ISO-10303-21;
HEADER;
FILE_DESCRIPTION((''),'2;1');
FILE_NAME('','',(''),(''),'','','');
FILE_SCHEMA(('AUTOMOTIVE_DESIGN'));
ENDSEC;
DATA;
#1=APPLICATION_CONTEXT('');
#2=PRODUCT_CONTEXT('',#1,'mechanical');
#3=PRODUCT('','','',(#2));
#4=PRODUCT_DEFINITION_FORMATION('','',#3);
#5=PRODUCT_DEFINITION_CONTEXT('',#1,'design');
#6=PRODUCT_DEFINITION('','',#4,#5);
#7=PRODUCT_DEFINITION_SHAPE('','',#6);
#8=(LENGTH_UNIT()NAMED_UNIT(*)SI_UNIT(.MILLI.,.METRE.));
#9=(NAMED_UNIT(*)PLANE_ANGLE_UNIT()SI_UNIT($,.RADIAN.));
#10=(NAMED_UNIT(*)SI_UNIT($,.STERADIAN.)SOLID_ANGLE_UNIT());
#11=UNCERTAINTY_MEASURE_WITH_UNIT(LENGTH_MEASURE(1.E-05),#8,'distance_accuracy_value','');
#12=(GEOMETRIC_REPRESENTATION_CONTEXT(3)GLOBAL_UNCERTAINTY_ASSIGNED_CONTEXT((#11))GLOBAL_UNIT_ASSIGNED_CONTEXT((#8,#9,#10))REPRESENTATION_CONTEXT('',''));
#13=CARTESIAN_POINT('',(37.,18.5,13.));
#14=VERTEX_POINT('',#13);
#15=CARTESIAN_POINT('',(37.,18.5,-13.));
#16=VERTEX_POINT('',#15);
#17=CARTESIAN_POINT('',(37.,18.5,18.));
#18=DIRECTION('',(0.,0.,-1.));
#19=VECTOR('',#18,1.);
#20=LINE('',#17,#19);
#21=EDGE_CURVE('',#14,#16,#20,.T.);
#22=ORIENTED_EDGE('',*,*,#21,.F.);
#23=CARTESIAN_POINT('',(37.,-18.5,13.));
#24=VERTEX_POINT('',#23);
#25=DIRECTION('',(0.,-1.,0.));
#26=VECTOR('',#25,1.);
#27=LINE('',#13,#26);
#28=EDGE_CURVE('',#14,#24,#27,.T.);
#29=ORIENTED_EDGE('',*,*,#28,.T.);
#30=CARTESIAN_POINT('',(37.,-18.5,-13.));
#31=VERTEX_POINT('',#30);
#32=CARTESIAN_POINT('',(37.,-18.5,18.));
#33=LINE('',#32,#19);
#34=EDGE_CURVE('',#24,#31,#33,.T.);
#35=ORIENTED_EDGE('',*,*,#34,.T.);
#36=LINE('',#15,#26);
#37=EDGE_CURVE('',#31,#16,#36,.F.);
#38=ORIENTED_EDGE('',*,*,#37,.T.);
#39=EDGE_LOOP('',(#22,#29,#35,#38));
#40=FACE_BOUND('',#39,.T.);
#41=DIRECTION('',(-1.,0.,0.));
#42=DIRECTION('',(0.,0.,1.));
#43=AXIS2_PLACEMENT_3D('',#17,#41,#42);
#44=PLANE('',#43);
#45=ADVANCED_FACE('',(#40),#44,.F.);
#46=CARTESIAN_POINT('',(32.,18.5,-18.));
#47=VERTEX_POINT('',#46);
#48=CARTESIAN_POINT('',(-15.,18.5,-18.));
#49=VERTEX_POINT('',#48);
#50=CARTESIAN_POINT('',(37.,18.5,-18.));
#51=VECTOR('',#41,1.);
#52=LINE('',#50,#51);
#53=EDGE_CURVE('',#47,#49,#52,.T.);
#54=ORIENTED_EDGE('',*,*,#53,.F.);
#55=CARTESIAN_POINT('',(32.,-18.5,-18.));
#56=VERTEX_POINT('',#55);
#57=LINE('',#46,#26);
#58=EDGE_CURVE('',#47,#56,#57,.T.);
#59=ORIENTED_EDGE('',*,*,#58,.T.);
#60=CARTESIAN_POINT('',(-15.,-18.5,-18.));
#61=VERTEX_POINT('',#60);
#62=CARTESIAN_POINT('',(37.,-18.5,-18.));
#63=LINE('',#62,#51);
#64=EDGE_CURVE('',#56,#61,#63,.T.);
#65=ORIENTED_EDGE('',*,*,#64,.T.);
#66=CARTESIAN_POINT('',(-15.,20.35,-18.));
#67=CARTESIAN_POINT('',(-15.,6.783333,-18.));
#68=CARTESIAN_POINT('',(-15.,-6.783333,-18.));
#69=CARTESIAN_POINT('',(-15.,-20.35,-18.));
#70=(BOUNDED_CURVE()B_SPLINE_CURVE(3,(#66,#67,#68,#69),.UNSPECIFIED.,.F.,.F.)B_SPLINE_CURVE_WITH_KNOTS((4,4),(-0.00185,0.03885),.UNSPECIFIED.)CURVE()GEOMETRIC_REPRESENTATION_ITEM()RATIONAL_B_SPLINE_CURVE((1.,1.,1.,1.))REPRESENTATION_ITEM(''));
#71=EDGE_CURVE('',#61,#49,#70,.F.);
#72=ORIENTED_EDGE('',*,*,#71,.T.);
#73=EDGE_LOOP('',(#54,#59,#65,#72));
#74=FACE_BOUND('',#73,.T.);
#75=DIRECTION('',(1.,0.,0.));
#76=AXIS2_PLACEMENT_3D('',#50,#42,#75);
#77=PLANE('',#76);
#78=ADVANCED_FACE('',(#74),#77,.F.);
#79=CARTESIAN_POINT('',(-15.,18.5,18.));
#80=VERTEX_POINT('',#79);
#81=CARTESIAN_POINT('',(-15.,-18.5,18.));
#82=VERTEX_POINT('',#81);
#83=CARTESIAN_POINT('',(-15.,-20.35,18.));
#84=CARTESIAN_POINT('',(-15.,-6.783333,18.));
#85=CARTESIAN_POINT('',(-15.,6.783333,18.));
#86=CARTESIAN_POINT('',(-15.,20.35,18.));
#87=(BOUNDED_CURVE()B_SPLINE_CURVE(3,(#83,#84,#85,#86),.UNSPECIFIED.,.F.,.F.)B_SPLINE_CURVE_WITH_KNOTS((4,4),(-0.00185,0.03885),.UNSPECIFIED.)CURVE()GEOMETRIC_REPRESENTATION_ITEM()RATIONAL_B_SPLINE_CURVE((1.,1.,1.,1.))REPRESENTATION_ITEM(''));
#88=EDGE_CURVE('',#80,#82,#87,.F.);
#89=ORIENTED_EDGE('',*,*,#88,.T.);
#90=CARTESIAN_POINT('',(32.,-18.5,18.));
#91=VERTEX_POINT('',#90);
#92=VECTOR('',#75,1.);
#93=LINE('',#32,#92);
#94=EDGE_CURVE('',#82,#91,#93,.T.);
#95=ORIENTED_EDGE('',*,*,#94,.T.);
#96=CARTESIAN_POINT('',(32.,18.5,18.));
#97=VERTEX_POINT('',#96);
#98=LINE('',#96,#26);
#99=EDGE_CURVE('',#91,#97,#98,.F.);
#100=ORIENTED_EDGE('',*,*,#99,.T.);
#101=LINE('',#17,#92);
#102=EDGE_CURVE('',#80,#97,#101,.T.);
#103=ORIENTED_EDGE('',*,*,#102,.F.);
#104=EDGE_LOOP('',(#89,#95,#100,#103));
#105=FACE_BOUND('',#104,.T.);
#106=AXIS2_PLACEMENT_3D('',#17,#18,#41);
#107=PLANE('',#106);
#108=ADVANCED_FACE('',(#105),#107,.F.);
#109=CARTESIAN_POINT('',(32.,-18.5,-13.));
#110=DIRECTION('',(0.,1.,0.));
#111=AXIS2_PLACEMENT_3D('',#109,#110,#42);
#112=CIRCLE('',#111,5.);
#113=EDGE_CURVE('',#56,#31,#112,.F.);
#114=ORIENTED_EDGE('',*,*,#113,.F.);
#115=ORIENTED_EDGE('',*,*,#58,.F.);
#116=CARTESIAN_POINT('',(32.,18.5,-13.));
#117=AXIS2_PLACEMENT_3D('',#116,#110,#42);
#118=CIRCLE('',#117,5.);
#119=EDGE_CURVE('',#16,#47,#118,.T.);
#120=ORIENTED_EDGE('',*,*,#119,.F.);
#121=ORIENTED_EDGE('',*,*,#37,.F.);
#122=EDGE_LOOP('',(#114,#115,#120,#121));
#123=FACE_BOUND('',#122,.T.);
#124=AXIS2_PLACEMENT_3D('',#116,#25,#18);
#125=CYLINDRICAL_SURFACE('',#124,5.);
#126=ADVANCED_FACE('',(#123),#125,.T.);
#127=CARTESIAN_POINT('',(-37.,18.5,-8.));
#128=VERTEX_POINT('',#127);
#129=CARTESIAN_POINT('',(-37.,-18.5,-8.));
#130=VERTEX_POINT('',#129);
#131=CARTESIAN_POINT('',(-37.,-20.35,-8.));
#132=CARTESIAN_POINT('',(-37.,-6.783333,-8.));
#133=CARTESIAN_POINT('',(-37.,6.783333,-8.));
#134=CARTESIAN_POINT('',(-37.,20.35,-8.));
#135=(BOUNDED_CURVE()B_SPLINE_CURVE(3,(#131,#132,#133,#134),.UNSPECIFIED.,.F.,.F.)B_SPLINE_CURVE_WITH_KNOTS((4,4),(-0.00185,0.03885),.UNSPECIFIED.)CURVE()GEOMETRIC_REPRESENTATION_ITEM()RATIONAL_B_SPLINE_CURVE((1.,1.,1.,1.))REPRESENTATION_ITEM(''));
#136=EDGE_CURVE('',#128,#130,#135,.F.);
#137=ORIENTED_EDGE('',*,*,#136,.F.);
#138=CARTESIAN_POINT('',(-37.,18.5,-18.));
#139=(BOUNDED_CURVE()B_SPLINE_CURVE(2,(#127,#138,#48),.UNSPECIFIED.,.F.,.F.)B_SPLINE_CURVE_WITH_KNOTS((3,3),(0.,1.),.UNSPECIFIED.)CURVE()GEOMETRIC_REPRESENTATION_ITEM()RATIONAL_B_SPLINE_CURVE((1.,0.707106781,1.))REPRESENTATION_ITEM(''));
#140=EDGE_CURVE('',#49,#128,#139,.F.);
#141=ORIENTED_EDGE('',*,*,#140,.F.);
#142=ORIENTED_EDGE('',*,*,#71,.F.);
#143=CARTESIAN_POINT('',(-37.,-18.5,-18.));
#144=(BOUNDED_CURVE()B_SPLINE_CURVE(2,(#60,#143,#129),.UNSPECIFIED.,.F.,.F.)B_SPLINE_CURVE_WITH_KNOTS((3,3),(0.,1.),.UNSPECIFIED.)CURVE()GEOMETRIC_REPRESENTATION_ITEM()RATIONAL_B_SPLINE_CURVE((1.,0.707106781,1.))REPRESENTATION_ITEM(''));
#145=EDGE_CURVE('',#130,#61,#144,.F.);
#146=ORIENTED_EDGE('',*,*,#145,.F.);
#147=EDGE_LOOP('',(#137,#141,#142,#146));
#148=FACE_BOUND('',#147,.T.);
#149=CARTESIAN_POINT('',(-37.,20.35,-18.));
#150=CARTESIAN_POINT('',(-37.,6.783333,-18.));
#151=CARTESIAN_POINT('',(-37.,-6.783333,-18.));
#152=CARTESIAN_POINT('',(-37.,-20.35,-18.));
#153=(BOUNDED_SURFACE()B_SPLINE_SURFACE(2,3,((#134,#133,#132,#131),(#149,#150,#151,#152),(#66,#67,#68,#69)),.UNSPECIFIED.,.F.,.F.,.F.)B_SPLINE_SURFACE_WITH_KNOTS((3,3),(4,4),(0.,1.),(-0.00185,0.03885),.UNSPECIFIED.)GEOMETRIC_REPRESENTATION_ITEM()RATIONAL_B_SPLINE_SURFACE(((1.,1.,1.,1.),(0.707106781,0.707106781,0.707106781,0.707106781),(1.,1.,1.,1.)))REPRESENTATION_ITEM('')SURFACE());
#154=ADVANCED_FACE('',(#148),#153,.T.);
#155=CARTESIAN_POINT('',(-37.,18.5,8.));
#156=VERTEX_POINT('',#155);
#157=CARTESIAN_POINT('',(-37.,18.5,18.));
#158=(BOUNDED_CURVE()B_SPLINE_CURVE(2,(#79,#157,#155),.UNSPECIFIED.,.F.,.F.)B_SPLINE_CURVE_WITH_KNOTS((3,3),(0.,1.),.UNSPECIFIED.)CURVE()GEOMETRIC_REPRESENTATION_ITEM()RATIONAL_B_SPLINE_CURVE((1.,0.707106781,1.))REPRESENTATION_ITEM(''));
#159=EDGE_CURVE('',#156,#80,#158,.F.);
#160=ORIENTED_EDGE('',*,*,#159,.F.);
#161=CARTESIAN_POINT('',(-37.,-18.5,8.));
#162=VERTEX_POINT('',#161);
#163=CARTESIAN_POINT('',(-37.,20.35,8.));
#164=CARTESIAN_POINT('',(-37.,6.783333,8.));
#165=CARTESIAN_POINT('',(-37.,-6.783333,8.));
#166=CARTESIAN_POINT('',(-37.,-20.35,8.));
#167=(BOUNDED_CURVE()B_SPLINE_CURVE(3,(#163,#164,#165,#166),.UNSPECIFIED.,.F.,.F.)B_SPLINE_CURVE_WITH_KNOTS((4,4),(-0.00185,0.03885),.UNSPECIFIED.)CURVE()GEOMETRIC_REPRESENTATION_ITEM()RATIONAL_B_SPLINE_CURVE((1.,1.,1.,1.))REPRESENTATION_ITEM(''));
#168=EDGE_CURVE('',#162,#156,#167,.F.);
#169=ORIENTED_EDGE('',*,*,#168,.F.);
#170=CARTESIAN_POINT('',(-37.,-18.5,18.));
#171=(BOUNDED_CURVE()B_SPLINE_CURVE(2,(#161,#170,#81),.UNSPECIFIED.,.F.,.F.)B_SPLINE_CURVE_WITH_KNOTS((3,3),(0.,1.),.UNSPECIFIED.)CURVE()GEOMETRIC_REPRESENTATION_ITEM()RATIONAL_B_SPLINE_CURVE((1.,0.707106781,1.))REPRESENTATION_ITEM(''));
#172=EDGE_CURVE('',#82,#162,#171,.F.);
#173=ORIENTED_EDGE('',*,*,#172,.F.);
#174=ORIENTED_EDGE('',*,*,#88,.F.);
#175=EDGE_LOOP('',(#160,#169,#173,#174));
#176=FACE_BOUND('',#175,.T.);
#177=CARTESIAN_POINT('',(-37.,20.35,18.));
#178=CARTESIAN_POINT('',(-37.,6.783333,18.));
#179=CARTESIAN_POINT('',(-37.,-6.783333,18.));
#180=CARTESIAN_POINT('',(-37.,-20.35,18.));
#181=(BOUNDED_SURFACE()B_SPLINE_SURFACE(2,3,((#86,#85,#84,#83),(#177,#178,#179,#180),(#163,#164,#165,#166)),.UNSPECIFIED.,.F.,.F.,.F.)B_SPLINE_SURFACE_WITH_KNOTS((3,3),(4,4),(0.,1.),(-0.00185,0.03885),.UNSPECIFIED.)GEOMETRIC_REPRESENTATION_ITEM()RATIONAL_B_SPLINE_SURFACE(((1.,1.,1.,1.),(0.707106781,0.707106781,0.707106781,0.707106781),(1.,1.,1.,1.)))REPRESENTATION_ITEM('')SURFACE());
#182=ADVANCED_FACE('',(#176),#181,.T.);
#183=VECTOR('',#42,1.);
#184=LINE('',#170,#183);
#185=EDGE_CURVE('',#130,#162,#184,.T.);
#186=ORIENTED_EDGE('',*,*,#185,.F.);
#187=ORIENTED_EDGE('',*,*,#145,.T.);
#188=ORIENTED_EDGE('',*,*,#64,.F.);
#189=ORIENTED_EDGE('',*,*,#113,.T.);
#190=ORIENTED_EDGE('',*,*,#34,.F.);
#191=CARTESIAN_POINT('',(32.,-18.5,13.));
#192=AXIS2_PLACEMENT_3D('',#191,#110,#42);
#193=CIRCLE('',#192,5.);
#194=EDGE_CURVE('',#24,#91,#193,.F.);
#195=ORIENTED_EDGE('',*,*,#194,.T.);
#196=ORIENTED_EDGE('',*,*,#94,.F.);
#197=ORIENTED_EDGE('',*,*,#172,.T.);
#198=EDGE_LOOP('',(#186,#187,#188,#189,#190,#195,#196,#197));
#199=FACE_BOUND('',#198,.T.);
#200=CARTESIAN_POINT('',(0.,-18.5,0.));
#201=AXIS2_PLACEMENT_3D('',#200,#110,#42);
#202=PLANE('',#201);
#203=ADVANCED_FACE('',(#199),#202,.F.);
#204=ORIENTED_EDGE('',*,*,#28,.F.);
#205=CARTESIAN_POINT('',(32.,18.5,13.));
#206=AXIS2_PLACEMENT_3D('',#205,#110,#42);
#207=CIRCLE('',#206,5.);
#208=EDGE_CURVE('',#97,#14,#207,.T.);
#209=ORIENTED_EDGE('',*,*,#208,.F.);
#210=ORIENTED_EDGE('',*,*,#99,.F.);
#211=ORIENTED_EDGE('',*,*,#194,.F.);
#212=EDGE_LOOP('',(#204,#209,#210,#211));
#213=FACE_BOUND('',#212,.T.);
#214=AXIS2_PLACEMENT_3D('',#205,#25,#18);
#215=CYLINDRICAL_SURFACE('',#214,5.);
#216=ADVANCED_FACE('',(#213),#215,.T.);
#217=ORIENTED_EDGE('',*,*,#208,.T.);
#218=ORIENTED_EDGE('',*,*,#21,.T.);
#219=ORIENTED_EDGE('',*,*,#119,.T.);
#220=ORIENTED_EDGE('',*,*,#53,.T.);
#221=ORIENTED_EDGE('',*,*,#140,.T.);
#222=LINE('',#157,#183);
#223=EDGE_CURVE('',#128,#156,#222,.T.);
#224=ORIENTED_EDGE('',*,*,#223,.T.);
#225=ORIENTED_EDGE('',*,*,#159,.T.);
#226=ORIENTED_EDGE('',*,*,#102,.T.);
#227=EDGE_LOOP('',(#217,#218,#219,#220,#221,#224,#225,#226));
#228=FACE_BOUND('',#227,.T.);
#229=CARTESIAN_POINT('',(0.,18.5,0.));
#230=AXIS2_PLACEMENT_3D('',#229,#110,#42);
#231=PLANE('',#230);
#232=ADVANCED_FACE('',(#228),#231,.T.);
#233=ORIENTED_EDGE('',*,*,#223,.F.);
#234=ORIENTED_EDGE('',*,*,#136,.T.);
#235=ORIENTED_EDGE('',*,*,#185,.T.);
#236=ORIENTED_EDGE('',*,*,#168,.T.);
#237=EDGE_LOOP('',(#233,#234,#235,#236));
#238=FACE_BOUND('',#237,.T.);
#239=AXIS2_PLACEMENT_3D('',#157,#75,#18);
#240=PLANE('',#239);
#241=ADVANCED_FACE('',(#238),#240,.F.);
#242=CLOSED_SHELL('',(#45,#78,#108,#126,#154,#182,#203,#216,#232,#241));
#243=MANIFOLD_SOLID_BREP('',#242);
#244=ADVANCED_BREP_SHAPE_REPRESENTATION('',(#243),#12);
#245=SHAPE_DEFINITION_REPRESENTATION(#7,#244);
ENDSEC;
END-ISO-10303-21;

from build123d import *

# Parameters (mm, degrees)
SKETCH1_W           = 74
SKETCH1_H           = 36
BOSS_EXTRUDE1_DEPTH = 18.5
FILLET1_SIZE        = 22
FILLET1_SIZE_2      = 10
FILLET2_R           = 5


with BuildPart() as part:
    # Sketch1 → Boss-Extrude1 (new, symmetric)
    with BuildSketch(Plane(origin=(0, 0, 0), x_dir=(1, 0, 0), z_dir=(0, 1, 0))):
        Rectangle(SKETCH1_W, SKETCH1_H)
    extrude(amount=BOSS_EXTRUDE1_DEPTH, both=True)

    # Fillet1
    # an asymmetric fillet: 22, 10 mm, written as the material it takes off along each edge
    with BuildSketch(Plane(origin=(-37, 73.5, -18), x_dir=(1, 0, 0), z_dir=(0, -1, 0))) as fillet1_piece_1:
        with BuildLine():
            Bezier((FILLET1_SIZE, 0), (0, 0), (0, FILLET1_SIZE_2), weights=[1, 0.707106781, 1])
            Line((0, FILLET1_SIZE_2), (0, 0))
            Line((0, 0), (FILLET1_SIZE, 0))
        make_face()
    extrude(amount=147, mode=Mode.SUBTRACT)
    with BuildSketch(Plane(origin=(-37, 73.5, 18), x_dir=(1, 0, 0), z_dir=(0, -1, 0))) as fillet1_piece_2:
        with BuildLine():
            Bezier((FILLET1_SIZE, 0), (0, 0), (0, -FILLET1_SIZE_2), weights=[1, 0.707106781, 1])
            Line((0, -FILLET1_SIZE_2), (0, 0))
            Line((0, 0), (FILLET1_SIZE, 0))
        make_face()
    extrude(amount=147, mode=Mode.SUBTRACT)

    # Fillet2
    fillet2_edges = [part.edges().sort_by_distance(p)[0] for p in [
        (37, 0, -18),
        (37, 0, 18),
    ]]
    fillet(fillet2_edges, radius=FILLET2_R)


solid = part.part
